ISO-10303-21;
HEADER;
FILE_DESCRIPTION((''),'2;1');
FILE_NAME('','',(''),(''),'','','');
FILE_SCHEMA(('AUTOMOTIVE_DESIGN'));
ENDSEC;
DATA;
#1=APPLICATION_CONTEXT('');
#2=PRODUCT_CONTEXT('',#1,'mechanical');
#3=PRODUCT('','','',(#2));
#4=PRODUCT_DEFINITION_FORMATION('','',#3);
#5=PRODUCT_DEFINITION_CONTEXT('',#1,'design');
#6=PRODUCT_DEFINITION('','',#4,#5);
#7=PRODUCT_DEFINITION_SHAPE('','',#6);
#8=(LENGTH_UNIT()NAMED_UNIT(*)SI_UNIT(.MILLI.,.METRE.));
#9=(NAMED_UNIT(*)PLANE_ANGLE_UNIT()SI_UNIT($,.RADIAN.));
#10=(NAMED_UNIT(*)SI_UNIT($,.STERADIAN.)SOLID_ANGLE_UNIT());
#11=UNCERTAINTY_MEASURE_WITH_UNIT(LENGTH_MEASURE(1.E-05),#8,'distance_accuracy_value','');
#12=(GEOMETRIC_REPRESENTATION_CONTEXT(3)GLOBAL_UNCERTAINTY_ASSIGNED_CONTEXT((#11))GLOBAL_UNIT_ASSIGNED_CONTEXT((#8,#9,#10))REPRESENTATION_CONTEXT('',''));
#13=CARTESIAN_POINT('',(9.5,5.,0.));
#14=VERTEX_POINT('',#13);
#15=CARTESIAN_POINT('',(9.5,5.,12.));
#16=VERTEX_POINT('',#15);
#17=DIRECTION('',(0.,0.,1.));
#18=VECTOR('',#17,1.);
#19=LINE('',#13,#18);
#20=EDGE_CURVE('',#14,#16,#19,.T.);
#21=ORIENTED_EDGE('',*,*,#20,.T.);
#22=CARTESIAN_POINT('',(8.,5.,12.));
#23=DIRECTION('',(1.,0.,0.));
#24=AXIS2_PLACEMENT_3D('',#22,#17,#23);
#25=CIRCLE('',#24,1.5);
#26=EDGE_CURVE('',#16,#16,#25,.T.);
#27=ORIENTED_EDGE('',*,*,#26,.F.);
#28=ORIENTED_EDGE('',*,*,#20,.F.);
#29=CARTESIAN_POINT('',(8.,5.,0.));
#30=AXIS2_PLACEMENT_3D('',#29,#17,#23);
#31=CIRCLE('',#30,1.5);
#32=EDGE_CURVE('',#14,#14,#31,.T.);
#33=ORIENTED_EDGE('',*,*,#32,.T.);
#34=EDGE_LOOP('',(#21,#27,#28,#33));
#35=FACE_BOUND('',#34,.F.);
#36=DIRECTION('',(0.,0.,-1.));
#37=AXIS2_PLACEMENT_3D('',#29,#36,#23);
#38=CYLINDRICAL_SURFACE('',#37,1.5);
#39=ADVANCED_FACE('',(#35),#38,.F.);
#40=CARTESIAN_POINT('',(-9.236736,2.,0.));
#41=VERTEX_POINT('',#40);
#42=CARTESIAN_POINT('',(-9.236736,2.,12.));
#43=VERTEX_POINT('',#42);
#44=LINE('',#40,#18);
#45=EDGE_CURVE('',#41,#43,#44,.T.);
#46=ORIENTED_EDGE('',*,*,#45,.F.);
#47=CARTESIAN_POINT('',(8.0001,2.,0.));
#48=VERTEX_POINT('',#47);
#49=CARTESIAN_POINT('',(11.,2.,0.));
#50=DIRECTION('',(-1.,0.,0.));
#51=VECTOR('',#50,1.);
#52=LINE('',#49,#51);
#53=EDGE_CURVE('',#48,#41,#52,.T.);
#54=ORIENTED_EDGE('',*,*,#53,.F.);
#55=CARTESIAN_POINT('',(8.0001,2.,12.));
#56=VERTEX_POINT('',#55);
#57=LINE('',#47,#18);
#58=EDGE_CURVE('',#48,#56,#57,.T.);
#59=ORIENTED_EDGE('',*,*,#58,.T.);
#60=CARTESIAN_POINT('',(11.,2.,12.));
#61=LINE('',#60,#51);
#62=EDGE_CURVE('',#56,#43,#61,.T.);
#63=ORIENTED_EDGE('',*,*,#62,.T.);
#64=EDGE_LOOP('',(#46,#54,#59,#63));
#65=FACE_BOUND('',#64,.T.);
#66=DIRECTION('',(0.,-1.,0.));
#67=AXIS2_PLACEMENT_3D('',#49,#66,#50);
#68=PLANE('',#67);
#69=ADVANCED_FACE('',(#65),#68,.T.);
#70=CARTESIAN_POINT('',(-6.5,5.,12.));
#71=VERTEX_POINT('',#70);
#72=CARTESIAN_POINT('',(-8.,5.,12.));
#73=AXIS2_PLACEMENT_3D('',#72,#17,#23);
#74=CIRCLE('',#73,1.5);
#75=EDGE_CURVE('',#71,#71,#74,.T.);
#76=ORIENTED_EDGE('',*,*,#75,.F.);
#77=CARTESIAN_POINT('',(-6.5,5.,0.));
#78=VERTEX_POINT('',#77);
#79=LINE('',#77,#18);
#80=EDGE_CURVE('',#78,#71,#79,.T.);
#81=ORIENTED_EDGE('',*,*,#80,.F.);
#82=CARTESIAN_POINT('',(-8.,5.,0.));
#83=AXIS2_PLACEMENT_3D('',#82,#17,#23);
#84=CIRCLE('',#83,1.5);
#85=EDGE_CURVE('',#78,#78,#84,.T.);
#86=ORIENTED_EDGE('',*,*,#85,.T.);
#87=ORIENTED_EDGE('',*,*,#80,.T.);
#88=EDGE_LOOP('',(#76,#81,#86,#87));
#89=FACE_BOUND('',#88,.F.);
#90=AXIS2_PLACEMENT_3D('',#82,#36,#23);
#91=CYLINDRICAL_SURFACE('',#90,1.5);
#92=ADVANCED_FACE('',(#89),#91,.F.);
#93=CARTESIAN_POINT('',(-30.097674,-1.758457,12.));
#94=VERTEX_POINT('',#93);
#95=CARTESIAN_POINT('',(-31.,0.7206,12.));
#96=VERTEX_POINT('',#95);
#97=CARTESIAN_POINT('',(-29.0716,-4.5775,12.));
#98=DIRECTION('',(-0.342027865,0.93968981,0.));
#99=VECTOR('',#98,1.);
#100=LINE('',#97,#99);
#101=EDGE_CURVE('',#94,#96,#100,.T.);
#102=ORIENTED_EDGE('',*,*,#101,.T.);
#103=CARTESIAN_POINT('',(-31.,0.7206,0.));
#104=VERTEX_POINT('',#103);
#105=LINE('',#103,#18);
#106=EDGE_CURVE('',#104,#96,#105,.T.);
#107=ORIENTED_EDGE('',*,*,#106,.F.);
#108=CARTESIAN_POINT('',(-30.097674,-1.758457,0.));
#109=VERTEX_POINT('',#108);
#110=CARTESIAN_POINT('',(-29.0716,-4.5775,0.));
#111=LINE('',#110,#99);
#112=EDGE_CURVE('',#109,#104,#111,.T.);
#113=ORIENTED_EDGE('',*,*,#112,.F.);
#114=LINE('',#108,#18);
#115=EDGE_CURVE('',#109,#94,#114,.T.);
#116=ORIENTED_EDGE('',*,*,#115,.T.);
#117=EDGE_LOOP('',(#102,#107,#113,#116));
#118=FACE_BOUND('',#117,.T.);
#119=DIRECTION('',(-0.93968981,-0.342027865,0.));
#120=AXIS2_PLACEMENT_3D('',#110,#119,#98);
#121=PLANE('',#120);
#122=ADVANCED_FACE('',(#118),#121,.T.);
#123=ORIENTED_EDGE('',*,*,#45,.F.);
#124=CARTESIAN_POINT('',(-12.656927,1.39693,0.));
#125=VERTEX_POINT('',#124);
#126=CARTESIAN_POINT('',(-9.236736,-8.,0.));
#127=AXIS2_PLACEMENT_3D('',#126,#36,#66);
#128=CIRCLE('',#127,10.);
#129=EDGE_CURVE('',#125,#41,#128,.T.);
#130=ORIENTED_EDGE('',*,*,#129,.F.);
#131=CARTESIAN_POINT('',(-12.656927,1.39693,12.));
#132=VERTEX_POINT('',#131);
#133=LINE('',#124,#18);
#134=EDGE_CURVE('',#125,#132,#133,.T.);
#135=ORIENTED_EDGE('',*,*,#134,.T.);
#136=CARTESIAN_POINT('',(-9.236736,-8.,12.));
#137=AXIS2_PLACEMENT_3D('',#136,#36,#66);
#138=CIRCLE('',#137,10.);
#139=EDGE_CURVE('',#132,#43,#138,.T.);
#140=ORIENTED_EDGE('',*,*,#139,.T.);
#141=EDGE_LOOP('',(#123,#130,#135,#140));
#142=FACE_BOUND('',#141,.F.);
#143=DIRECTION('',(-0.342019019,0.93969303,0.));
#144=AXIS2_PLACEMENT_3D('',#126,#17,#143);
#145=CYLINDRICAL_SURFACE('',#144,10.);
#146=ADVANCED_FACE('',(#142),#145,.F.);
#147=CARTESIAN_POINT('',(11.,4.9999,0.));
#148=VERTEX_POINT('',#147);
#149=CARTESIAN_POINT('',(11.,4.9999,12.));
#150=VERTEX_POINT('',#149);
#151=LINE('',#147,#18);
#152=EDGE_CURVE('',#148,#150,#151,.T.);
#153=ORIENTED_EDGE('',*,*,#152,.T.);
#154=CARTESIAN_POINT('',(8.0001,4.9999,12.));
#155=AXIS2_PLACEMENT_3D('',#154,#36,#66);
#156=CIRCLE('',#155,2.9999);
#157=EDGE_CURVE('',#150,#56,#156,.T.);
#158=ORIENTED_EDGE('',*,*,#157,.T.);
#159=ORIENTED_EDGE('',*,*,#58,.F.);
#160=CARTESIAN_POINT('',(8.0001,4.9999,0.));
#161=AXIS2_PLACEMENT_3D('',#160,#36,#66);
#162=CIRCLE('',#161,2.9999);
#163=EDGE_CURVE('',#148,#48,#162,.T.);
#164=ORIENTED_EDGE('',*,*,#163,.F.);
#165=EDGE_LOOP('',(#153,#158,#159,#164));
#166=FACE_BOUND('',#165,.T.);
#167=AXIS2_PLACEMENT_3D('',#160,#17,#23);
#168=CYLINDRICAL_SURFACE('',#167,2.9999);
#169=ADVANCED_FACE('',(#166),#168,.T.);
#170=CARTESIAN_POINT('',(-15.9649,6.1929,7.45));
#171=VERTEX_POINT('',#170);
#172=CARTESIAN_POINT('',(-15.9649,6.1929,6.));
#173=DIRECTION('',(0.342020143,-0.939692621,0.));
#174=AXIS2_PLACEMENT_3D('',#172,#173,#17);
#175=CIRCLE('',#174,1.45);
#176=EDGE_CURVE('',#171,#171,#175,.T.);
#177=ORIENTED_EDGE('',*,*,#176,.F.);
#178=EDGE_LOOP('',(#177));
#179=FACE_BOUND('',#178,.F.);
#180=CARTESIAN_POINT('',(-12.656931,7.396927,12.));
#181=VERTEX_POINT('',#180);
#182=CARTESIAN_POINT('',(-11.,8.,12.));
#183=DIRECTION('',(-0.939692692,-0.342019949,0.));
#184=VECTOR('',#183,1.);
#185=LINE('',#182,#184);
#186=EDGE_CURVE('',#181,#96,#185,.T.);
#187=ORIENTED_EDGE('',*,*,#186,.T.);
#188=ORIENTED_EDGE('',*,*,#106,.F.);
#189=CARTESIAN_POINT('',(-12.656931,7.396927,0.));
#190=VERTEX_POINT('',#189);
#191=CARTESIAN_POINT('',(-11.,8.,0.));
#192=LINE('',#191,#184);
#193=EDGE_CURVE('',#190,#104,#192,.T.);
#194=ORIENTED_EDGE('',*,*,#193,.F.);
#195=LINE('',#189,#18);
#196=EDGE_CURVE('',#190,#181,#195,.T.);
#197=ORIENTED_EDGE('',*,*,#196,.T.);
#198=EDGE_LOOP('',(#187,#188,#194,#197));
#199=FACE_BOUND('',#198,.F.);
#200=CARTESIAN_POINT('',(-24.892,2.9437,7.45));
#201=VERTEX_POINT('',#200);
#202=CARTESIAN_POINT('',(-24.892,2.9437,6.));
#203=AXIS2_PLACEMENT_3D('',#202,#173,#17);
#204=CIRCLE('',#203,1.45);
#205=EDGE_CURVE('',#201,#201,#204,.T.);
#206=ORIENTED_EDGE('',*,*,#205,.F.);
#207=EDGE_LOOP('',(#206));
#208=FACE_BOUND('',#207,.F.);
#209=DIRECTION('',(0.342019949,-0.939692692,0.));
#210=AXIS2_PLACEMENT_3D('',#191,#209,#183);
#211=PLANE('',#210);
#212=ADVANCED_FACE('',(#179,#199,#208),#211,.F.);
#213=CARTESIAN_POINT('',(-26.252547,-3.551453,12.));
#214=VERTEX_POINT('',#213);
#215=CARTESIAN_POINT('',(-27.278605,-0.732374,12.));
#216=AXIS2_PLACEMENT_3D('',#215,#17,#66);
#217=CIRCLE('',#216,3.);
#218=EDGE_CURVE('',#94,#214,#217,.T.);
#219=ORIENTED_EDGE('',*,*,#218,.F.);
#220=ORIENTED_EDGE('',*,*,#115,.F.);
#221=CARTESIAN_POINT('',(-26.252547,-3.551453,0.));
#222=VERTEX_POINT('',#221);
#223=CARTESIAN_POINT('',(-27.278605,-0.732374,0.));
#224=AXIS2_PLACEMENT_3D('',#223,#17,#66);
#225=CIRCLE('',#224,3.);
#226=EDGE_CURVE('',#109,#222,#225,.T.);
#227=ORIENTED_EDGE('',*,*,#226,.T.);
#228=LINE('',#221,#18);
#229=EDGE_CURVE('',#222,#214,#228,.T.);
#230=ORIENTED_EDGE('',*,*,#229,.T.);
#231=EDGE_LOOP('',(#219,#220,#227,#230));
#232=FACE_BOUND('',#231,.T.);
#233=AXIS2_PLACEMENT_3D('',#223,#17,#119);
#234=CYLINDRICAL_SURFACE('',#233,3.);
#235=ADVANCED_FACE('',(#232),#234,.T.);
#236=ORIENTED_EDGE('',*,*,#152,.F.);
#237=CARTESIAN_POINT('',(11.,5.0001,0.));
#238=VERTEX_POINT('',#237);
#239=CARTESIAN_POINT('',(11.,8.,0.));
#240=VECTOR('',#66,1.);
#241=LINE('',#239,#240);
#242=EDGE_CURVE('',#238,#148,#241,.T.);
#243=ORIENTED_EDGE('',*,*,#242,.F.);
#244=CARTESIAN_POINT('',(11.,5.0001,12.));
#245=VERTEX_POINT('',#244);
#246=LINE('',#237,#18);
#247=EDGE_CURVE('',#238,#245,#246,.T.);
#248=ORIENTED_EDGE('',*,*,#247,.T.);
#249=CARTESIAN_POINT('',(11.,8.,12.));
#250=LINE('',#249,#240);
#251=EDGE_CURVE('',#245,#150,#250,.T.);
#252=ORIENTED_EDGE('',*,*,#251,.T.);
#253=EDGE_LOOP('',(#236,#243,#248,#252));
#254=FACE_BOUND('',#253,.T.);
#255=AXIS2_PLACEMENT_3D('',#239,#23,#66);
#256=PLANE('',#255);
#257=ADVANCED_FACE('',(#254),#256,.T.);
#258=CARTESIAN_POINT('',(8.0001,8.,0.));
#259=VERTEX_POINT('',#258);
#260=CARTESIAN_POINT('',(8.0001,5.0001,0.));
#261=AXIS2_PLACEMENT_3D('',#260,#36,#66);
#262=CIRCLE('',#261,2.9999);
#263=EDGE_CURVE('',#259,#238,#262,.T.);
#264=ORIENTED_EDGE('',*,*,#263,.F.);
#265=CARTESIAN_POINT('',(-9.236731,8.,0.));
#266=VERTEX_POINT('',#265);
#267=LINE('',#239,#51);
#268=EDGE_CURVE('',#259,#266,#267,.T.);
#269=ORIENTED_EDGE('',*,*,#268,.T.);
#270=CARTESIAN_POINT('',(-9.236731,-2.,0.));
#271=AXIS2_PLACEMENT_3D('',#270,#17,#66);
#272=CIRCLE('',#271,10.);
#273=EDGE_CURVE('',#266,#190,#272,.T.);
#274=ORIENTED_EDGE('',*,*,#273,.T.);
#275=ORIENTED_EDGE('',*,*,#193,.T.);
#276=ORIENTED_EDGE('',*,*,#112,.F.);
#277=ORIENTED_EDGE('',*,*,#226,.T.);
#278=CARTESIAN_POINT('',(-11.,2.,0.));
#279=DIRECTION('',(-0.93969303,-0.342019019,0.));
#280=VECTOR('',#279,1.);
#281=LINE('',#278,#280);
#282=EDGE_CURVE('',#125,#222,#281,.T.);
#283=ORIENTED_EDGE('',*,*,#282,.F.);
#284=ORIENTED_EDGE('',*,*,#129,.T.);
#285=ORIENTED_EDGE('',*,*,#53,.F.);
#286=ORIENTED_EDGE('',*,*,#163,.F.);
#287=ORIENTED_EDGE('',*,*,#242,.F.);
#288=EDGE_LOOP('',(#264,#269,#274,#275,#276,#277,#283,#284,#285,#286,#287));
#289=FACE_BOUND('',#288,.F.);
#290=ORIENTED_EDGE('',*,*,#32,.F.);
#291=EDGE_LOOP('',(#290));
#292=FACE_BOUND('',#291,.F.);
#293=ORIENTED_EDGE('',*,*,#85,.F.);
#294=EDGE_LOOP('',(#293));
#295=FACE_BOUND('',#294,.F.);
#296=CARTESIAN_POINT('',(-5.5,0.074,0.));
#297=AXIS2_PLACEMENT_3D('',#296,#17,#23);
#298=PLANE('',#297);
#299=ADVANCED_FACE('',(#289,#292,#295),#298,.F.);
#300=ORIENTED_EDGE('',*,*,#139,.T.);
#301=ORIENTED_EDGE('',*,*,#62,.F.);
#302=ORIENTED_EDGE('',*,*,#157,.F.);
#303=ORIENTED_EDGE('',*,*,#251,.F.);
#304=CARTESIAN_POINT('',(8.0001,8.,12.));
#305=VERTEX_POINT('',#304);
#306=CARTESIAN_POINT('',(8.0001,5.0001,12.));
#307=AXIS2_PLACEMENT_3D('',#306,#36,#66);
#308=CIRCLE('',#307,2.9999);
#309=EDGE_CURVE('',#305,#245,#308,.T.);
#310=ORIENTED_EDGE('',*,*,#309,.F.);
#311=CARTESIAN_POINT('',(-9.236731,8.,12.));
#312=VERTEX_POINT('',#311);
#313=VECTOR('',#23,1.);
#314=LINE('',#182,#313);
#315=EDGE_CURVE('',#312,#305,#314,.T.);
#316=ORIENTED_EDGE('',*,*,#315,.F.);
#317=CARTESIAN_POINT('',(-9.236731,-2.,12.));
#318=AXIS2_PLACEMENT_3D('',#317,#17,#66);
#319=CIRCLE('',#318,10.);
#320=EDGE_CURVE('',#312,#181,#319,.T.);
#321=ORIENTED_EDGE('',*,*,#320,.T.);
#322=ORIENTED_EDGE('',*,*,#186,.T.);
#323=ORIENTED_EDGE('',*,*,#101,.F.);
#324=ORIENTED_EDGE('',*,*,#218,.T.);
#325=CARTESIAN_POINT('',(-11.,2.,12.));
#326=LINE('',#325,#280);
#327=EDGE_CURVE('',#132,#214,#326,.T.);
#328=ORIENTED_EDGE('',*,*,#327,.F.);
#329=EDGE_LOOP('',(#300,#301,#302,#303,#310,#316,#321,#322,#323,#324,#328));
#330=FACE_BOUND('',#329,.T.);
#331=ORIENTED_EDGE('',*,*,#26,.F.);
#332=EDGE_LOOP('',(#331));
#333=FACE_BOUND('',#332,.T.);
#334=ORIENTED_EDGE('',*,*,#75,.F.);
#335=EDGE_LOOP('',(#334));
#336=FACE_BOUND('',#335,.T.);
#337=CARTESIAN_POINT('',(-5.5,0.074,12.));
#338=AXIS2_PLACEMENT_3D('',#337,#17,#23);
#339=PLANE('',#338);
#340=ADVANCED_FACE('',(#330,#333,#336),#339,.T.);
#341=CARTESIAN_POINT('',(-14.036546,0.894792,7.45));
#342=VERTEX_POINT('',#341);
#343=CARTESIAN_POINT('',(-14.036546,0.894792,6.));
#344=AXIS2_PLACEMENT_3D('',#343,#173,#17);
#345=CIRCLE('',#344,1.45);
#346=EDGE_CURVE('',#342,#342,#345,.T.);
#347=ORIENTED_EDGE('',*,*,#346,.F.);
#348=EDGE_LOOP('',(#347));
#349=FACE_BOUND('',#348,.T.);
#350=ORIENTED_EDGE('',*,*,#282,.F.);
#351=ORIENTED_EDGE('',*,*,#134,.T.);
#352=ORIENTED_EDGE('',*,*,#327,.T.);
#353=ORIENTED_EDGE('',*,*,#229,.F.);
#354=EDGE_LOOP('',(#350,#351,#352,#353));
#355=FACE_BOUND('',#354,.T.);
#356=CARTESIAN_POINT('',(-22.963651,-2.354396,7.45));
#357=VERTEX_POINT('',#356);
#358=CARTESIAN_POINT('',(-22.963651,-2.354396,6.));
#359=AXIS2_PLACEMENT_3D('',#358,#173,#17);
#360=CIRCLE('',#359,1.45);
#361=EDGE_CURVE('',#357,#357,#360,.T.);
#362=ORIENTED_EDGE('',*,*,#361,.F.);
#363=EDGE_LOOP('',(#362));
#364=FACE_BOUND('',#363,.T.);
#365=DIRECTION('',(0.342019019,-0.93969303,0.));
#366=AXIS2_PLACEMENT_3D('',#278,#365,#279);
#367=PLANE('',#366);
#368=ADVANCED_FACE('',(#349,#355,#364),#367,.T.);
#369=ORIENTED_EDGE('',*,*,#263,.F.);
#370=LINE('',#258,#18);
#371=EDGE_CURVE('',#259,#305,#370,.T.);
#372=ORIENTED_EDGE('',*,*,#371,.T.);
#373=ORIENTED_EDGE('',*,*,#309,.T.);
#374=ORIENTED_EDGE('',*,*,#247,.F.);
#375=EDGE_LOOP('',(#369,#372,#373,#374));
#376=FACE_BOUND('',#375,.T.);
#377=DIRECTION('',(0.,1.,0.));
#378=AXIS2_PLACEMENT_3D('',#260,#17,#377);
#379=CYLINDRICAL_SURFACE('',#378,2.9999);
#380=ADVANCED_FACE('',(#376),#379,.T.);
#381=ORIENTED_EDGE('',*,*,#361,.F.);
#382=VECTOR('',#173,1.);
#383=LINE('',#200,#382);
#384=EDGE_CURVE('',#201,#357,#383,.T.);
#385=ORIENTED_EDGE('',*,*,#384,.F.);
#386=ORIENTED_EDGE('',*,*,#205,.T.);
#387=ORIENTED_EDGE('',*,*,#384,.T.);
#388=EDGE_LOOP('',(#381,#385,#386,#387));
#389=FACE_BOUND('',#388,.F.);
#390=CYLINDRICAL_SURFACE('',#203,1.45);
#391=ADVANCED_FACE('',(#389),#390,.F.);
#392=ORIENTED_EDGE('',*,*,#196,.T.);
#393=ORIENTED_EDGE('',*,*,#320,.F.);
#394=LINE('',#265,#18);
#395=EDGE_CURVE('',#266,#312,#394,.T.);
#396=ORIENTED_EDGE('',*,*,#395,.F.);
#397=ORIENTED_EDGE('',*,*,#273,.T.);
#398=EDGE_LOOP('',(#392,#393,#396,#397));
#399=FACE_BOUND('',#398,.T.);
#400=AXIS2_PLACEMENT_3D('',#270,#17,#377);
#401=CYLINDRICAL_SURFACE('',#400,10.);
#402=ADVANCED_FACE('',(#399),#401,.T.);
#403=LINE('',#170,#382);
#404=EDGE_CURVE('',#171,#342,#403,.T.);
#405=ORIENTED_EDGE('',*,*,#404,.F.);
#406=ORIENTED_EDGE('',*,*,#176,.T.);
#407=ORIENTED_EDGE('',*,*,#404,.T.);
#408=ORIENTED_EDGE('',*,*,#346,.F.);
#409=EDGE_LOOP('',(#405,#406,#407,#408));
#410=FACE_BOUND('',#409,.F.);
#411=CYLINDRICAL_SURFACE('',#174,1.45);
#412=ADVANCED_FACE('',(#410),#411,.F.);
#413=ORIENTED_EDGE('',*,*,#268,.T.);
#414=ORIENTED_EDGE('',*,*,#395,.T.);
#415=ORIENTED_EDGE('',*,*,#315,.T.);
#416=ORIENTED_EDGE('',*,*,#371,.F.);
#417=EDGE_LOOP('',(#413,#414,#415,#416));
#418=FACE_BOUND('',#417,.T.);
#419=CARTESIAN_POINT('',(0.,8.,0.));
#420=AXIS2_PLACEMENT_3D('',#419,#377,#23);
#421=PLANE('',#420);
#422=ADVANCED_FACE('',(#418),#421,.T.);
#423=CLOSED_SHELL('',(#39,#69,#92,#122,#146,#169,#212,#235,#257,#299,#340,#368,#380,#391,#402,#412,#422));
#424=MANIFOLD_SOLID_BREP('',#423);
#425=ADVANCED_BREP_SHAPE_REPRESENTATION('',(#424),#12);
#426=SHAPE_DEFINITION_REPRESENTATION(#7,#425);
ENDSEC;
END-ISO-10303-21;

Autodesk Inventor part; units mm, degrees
ref_plane "YZ Plane" through (0, 0, 0) normal (1, 0, 0) x (0, 1, 0)
ref_plane "XZ Plane" through (0, 0, 0) normal (0, 1, 0) x (-1, 0, 0)
ref_plane "XY Plane" through (0, 0, 0) normal (0, 0, 1) x (1, 0, 0)
sketch "Náčrt2" plane through (-5.5, 0.074, 0) normal (0, 0, 1) x (1, 0, 0)
  line L0 (5.5, 7.926) -> (16.5, 7.926)
  circle A0 centre (13.5, 4.926) radius 1.5
  line L1 (16.5, 7.926) -> (16.5, 1.926)
  line L2 (16.5, 1.926) -> (-5.5, 1.926)
  line L3 (5.5, 7.926) -> (-5.5, 7.926)
  circle A1 centre (-2.5, 4.926) radius 1.5
  line L4 (-5.5, 7.926) -> (-5.5, 1.926)
  line L5 (-5.5, 7.926) -> (-25.5, 0.6466)
  line L6 (-5.5, 1.926) -> (-23.5716, -4.6515)
  line L7 (-23.5716, -4.6515) -> (-25.5, 0.6466)
  point P0 (5.5, -0.074)
  point P1 (5.5, -0.074)
  dimension "d2" = 3
  dimension "d5" = 3
  dimension "d4" = 8
  dimension "d3" = 5
  dimension "d1" = 3
  dimension "d0" = 3
  dimension "d11" = 3
  dimension "d22" = 20
  dimension "d23" = 20
  dimension "d39" = 3
  dimension "d40" = 22
  dimension "d41" = 3
extrude "Vysunutí1" add sketch "Náčrt2" along normal blind 12
fillet "Zaoblení2" radius 3 2 edges at (11, 2, 6) (11, 8, 6)
fillet "Zaoblení3" radius 10 2 edges at (-11, 2, 6) (-11, 8, 6)
fillet "Zaoblení4" radius 3 1 edges at (-29.0716, -4.5775, 6)
sketch "Náčrt3" plane through (-31, 0.7206, 12) normal (-0.3420201, 0.9396926, 0) x (0.9396926, 0.3420201, 0)
  line L0 (19.5203, 12) -> (0, 12) projected
  line L1 (0, 12) -> (0, 0) projected
  point P0 (28.884, 12)
  point P1 (16, 6)
  point P2 (6.5, 6)
  dimension "d27" = 6
  dimension "d28" = 6
  dimension "d29" = 9.5
  dimension "d30" = 16
hole "Díra2" at (-15.9649, 6.1929, 6) at (-24.892, 2.9437, 6) direction (0.3420201, -0.9396926, 0) diameter 2.9 end through all clearance for "Šroub se zápustnou hlavou ISO 2009/7046" size "M2.5" standard "ISO"
properties part number "vrch" material "ABS plast"
